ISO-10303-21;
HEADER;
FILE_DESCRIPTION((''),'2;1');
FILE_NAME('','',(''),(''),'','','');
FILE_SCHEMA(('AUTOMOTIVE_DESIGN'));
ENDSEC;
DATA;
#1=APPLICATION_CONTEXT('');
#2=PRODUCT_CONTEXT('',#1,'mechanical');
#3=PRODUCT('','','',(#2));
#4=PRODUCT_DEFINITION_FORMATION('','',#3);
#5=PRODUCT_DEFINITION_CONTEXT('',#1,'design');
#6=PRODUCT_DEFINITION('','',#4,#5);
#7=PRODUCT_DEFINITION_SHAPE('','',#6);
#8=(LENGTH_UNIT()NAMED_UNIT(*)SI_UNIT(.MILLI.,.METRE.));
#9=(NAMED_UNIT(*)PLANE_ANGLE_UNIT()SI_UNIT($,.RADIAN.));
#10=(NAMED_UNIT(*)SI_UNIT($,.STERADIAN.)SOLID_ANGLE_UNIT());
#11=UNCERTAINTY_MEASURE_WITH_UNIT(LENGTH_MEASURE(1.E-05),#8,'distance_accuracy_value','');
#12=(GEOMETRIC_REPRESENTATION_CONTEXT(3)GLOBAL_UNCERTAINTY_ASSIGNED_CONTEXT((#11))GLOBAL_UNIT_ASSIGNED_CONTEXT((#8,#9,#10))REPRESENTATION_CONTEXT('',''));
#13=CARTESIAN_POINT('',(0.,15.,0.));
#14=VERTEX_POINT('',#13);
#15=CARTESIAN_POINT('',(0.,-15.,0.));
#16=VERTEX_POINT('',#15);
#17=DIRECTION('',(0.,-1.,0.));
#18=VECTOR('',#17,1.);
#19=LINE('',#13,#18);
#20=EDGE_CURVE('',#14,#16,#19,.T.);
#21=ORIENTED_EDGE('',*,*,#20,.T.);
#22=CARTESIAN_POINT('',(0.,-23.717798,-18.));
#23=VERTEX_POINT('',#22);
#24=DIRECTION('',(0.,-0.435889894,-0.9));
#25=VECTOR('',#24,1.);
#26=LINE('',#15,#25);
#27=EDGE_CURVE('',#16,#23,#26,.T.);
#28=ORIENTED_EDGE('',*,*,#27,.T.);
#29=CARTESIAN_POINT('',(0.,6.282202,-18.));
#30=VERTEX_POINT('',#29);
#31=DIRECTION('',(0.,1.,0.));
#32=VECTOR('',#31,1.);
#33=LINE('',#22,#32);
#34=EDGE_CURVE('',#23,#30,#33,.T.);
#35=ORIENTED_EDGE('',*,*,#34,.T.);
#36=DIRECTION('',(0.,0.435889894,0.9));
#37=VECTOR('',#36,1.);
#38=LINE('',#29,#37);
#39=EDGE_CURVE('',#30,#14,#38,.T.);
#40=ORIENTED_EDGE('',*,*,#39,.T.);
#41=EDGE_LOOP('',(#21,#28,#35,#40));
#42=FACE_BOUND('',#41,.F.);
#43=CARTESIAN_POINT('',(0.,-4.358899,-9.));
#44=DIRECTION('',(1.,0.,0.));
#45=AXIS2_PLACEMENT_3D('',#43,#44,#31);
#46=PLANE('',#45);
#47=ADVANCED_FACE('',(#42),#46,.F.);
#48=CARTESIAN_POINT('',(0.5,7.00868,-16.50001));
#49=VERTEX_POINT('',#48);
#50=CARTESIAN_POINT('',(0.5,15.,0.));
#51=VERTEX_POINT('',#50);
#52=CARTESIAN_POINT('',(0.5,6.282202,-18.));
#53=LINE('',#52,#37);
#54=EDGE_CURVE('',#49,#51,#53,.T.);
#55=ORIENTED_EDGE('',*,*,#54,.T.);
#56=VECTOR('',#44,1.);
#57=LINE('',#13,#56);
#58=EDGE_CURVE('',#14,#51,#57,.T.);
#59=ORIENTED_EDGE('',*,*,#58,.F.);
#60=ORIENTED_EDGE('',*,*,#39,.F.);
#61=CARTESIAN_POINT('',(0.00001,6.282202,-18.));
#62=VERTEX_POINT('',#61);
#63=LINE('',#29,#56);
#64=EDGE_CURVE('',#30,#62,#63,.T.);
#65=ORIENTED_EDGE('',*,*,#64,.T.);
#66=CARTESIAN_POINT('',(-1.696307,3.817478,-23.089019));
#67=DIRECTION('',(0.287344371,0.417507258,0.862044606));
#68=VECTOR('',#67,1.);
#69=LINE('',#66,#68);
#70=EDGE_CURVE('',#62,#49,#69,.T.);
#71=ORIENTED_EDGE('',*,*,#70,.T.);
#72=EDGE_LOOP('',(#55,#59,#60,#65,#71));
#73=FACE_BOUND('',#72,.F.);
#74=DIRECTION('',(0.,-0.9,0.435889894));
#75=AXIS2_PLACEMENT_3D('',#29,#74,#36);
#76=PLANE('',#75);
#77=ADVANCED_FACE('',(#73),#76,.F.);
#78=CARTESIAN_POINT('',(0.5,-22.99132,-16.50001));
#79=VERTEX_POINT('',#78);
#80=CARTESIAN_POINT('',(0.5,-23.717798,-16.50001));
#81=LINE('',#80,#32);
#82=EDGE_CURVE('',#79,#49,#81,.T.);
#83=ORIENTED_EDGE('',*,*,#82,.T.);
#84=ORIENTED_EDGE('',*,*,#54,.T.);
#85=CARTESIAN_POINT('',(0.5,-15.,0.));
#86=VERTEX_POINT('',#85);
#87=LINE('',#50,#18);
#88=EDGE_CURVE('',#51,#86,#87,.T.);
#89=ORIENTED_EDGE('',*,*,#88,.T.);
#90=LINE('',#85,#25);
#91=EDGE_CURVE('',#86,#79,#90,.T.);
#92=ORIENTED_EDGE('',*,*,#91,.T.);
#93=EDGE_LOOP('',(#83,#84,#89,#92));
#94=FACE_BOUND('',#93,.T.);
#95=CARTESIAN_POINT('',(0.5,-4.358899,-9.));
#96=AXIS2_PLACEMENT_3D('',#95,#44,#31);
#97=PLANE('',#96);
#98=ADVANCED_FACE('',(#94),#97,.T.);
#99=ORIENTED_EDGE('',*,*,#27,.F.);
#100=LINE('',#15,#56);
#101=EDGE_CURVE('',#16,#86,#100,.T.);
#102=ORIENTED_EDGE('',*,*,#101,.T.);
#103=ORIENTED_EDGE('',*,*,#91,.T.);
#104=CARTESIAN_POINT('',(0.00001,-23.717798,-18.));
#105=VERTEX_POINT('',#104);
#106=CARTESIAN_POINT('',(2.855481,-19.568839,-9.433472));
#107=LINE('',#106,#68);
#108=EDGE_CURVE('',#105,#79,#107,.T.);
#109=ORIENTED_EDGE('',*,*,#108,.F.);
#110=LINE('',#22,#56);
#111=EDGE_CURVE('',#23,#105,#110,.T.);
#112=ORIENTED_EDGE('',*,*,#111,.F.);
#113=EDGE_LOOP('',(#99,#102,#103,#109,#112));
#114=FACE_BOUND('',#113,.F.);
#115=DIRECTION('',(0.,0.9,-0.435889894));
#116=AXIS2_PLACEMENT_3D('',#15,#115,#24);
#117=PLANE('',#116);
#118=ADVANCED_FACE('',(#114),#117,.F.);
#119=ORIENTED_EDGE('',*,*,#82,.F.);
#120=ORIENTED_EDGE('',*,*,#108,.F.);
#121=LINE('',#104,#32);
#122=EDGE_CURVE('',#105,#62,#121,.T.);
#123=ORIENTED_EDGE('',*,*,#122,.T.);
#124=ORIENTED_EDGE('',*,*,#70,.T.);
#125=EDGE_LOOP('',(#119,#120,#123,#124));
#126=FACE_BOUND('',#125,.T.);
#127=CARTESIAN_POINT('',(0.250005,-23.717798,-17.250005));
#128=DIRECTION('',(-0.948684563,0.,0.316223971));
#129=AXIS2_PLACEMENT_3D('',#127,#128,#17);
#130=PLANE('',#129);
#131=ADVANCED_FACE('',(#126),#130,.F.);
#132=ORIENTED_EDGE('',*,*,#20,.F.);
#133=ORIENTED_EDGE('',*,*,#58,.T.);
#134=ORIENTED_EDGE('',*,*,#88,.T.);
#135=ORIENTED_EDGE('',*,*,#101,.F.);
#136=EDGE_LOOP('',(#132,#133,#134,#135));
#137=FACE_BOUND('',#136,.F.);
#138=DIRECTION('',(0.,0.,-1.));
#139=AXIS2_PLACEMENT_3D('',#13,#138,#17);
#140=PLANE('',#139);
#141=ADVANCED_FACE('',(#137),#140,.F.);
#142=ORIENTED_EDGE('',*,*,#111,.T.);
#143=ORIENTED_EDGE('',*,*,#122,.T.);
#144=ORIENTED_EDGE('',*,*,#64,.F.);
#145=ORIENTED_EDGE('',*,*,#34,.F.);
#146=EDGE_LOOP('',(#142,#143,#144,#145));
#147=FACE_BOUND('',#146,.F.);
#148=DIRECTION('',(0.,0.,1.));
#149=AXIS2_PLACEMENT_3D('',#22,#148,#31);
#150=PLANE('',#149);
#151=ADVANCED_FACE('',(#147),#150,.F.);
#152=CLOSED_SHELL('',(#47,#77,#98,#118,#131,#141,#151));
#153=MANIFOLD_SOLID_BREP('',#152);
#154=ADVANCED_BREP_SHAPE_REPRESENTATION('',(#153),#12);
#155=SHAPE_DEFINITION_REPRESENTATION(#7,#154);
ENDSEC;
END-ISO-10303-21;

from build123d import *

# Parameters (mm, degrees)
F1_DEPTH = 0.5
F2_SIZE2 = 1.49999
F2_SIZE  = 0.49999


# Not quite as in the source:
# - a fillet or chamfer is up to 0.001 mm smaller than in the source, because OpenCascade refuses the exact size


with BuildPart() as f1:
    # F0 (on Right) → F1 (new body)
    with BuildSketch(Plane.YZ):
        Polygon((15, 0), (-15, 0), (-23.7177978871, -18), (6.2822021129, -18), align=None)
    extrude(amount=F1_DEPTH)

    # F2 (size 0.5 and 1.5 in the source; OpenCascade refuses exactly that, so slightly less here)
    f2_edges = [f1.edges().sort_by_distance(p)[0] for p in [
        (0.5, -8.717798, -18),
    ]]
    f2_side = f1.faces().sort_by_distance((0.25, -8.717798, -18))[0]
    chamfer(f2_edges, length=F2_SIZE, length2=F2_SIZE2, reference=f2_side)


solid = f1.part
